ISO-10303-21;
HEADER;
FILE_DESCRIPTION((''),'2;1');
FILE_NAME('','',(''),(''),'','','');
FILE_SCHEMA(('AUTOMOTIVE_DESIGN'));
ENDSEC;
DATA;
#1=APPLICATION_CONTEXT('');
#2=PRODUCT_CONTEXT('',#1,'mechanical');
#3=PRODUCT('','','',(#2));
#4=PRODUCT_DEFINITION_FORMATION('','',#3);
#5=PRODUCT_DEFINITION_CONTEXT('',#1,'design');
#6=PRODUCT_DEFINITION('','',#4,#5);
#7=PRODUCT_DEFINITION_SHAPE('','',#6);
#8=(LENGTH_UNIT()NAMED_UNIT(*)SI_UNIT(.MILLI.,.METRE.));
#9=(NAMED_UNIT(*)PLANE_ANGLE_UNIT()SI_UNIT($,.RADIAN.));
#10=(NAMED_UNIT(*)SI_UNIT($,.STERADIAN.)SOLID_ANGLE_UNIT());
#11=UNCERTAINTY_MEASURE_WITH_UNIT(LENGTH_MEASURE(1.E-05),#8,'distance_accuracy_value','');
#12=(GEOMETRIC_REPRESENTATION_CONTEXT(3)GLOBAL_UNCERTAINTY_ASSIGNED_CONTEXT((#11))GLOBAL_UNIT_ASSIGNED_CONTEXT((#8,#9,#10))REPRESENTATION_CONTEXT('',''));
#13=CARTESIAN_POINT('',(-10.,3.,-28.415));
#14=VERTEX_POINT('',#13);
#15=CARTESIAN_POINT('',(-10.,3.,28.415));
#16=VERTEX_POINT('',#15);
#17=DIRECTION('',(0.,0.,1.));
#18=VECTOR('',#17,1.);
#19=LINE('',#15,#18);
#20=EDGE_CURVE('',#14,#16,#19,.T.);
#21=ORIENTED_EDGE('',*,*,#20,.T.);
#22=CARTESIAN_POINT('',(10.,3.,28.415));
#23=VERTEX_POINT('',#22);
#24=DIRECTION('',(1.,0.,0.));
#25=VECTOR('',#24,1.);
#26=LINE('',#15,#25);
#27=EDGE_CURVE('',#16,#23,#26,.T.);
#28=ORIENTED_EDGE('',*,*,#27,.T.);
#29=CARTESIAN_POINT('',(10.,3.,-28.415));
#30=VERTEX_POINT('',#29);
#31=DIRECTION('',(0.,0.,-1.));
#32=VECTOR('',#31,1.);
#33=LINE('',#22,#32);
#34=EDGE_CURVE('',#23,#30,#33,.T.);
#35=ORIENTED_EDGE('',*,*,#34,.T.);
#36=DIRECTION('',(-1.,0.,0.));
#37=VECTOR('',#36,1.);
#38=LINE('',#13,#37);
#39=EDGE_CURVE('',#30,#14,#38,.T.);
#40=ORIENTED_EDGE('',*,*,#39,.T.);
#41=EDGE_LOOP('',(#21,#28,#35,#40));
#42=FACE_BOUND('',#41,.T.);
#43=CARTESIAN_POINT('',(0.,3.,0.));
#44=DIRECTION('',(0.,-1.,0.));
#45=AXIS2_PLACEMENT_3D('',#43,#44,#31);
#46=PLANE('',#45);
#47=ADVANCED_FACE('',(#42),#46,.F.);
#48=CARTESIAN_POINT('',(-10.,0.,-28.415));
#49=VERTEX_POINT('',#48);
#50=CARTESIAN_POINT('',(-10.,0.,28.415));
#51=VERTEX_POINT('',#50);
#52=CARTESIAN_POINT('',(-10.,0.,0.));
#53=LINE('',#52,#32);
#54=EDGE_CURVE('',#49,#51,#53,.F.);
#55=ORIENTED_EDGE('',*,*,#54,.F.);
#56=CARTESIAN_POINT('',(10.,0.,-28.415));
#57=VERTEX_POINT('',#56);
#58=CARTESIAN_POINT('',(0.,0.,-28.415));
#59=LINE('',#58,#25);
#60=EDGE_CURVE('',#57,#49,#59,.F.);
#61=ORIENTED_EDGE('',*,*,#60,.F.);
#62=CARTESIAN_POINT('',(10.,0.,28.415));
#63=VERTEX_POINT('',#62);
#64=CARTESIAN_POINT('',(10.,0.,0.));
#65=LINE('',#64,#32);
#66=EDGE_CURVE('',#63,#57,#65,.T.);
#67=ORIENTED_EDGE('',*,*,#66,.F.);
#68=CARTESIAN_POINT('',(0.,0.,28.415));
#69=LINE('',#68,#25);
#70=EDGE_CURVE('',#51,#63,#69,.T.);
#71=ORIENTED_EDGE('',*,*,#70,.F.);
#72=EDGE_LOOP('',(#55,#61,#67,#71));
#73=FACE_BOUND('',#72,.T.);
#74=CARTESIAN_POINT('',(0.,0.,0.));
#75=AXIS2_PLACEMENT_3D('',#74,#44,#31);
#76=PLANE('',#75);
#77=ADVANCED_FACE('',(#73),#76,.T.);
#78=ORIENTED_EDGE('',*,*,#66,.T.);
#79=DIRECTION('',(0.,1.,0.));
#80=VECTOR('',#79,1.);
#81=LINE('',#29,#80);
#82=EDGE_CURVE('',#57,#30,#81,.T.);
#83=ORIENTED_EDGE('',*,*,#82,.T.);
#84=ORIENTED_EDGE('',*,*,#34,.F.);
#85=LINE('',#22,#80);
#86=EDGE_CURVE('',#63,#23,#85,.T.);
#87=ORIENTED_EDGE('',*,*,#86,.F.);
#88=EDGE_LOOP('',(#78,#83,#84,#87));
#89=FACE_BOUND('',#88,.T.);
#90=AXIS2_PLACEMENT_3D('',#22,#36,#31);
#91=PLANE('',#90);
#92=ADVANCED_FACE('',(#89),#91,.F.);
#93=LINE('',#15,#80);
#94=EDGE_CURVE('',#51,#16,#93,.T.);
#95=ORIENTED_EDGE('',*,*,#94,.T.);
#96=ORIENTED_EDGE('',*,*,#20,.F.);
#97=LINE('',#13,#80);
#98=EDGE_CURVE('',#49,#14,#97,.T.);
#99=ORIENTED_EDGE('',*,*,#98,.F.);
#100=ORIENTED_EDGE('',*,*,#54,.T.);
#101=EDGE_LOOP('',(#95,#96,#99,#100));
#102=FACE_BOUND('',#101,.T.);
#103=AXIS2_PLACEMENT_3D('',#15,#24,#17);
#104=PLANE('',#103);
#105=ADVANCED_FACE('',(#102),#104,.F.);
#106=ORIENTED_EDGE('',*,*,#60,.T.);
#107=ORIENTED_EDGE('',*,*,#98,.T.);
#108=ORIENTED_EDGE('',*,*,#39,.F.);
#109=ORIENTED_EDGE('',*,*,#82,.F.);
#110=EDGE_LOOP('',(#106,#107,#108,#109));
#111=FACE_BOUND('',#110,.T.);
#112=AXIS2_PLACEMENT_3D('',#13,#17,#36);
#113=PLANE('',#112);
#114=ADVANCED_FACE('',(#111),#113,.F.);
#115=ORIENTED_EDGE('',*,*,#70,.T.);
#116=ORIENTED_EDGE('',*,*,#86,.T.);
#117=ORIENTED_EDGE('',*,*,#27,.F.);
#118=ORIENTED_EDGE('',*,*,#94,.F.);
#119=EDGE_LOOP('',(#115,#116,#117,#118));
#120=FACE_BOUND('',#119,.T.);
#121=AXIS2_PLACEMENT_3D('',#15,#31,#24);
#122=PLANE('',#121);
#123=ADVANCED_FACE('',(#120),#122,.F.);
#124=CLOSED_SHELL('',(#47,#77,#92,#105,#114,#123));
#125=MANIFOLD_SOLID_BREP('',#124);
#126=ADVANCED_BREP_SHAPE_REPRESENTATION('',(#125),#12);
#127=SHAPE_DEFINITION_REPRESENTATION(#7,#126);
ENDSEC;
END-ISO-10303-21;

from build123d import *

# Parameters (mm, degrees)
SKETCH_1_W      = 20
SKETCH_1_H      = 56.83
EXTRUDE_1_DEPTH = 3


with BuildPart() as part:
    # Sketch 1 → Бобышка-Вытянуть1 (new body)
    with BuildSketch(Plane(origin=(0, 0, 0), x_dir=(1, 0, 0), z_dir=(0, 1, 0))):
        Rectangle(SKETCH_1_W, SKETCH_1_H)
    extrude(amount=EXTRUDE_1_DEPTH)


solid = part.part
